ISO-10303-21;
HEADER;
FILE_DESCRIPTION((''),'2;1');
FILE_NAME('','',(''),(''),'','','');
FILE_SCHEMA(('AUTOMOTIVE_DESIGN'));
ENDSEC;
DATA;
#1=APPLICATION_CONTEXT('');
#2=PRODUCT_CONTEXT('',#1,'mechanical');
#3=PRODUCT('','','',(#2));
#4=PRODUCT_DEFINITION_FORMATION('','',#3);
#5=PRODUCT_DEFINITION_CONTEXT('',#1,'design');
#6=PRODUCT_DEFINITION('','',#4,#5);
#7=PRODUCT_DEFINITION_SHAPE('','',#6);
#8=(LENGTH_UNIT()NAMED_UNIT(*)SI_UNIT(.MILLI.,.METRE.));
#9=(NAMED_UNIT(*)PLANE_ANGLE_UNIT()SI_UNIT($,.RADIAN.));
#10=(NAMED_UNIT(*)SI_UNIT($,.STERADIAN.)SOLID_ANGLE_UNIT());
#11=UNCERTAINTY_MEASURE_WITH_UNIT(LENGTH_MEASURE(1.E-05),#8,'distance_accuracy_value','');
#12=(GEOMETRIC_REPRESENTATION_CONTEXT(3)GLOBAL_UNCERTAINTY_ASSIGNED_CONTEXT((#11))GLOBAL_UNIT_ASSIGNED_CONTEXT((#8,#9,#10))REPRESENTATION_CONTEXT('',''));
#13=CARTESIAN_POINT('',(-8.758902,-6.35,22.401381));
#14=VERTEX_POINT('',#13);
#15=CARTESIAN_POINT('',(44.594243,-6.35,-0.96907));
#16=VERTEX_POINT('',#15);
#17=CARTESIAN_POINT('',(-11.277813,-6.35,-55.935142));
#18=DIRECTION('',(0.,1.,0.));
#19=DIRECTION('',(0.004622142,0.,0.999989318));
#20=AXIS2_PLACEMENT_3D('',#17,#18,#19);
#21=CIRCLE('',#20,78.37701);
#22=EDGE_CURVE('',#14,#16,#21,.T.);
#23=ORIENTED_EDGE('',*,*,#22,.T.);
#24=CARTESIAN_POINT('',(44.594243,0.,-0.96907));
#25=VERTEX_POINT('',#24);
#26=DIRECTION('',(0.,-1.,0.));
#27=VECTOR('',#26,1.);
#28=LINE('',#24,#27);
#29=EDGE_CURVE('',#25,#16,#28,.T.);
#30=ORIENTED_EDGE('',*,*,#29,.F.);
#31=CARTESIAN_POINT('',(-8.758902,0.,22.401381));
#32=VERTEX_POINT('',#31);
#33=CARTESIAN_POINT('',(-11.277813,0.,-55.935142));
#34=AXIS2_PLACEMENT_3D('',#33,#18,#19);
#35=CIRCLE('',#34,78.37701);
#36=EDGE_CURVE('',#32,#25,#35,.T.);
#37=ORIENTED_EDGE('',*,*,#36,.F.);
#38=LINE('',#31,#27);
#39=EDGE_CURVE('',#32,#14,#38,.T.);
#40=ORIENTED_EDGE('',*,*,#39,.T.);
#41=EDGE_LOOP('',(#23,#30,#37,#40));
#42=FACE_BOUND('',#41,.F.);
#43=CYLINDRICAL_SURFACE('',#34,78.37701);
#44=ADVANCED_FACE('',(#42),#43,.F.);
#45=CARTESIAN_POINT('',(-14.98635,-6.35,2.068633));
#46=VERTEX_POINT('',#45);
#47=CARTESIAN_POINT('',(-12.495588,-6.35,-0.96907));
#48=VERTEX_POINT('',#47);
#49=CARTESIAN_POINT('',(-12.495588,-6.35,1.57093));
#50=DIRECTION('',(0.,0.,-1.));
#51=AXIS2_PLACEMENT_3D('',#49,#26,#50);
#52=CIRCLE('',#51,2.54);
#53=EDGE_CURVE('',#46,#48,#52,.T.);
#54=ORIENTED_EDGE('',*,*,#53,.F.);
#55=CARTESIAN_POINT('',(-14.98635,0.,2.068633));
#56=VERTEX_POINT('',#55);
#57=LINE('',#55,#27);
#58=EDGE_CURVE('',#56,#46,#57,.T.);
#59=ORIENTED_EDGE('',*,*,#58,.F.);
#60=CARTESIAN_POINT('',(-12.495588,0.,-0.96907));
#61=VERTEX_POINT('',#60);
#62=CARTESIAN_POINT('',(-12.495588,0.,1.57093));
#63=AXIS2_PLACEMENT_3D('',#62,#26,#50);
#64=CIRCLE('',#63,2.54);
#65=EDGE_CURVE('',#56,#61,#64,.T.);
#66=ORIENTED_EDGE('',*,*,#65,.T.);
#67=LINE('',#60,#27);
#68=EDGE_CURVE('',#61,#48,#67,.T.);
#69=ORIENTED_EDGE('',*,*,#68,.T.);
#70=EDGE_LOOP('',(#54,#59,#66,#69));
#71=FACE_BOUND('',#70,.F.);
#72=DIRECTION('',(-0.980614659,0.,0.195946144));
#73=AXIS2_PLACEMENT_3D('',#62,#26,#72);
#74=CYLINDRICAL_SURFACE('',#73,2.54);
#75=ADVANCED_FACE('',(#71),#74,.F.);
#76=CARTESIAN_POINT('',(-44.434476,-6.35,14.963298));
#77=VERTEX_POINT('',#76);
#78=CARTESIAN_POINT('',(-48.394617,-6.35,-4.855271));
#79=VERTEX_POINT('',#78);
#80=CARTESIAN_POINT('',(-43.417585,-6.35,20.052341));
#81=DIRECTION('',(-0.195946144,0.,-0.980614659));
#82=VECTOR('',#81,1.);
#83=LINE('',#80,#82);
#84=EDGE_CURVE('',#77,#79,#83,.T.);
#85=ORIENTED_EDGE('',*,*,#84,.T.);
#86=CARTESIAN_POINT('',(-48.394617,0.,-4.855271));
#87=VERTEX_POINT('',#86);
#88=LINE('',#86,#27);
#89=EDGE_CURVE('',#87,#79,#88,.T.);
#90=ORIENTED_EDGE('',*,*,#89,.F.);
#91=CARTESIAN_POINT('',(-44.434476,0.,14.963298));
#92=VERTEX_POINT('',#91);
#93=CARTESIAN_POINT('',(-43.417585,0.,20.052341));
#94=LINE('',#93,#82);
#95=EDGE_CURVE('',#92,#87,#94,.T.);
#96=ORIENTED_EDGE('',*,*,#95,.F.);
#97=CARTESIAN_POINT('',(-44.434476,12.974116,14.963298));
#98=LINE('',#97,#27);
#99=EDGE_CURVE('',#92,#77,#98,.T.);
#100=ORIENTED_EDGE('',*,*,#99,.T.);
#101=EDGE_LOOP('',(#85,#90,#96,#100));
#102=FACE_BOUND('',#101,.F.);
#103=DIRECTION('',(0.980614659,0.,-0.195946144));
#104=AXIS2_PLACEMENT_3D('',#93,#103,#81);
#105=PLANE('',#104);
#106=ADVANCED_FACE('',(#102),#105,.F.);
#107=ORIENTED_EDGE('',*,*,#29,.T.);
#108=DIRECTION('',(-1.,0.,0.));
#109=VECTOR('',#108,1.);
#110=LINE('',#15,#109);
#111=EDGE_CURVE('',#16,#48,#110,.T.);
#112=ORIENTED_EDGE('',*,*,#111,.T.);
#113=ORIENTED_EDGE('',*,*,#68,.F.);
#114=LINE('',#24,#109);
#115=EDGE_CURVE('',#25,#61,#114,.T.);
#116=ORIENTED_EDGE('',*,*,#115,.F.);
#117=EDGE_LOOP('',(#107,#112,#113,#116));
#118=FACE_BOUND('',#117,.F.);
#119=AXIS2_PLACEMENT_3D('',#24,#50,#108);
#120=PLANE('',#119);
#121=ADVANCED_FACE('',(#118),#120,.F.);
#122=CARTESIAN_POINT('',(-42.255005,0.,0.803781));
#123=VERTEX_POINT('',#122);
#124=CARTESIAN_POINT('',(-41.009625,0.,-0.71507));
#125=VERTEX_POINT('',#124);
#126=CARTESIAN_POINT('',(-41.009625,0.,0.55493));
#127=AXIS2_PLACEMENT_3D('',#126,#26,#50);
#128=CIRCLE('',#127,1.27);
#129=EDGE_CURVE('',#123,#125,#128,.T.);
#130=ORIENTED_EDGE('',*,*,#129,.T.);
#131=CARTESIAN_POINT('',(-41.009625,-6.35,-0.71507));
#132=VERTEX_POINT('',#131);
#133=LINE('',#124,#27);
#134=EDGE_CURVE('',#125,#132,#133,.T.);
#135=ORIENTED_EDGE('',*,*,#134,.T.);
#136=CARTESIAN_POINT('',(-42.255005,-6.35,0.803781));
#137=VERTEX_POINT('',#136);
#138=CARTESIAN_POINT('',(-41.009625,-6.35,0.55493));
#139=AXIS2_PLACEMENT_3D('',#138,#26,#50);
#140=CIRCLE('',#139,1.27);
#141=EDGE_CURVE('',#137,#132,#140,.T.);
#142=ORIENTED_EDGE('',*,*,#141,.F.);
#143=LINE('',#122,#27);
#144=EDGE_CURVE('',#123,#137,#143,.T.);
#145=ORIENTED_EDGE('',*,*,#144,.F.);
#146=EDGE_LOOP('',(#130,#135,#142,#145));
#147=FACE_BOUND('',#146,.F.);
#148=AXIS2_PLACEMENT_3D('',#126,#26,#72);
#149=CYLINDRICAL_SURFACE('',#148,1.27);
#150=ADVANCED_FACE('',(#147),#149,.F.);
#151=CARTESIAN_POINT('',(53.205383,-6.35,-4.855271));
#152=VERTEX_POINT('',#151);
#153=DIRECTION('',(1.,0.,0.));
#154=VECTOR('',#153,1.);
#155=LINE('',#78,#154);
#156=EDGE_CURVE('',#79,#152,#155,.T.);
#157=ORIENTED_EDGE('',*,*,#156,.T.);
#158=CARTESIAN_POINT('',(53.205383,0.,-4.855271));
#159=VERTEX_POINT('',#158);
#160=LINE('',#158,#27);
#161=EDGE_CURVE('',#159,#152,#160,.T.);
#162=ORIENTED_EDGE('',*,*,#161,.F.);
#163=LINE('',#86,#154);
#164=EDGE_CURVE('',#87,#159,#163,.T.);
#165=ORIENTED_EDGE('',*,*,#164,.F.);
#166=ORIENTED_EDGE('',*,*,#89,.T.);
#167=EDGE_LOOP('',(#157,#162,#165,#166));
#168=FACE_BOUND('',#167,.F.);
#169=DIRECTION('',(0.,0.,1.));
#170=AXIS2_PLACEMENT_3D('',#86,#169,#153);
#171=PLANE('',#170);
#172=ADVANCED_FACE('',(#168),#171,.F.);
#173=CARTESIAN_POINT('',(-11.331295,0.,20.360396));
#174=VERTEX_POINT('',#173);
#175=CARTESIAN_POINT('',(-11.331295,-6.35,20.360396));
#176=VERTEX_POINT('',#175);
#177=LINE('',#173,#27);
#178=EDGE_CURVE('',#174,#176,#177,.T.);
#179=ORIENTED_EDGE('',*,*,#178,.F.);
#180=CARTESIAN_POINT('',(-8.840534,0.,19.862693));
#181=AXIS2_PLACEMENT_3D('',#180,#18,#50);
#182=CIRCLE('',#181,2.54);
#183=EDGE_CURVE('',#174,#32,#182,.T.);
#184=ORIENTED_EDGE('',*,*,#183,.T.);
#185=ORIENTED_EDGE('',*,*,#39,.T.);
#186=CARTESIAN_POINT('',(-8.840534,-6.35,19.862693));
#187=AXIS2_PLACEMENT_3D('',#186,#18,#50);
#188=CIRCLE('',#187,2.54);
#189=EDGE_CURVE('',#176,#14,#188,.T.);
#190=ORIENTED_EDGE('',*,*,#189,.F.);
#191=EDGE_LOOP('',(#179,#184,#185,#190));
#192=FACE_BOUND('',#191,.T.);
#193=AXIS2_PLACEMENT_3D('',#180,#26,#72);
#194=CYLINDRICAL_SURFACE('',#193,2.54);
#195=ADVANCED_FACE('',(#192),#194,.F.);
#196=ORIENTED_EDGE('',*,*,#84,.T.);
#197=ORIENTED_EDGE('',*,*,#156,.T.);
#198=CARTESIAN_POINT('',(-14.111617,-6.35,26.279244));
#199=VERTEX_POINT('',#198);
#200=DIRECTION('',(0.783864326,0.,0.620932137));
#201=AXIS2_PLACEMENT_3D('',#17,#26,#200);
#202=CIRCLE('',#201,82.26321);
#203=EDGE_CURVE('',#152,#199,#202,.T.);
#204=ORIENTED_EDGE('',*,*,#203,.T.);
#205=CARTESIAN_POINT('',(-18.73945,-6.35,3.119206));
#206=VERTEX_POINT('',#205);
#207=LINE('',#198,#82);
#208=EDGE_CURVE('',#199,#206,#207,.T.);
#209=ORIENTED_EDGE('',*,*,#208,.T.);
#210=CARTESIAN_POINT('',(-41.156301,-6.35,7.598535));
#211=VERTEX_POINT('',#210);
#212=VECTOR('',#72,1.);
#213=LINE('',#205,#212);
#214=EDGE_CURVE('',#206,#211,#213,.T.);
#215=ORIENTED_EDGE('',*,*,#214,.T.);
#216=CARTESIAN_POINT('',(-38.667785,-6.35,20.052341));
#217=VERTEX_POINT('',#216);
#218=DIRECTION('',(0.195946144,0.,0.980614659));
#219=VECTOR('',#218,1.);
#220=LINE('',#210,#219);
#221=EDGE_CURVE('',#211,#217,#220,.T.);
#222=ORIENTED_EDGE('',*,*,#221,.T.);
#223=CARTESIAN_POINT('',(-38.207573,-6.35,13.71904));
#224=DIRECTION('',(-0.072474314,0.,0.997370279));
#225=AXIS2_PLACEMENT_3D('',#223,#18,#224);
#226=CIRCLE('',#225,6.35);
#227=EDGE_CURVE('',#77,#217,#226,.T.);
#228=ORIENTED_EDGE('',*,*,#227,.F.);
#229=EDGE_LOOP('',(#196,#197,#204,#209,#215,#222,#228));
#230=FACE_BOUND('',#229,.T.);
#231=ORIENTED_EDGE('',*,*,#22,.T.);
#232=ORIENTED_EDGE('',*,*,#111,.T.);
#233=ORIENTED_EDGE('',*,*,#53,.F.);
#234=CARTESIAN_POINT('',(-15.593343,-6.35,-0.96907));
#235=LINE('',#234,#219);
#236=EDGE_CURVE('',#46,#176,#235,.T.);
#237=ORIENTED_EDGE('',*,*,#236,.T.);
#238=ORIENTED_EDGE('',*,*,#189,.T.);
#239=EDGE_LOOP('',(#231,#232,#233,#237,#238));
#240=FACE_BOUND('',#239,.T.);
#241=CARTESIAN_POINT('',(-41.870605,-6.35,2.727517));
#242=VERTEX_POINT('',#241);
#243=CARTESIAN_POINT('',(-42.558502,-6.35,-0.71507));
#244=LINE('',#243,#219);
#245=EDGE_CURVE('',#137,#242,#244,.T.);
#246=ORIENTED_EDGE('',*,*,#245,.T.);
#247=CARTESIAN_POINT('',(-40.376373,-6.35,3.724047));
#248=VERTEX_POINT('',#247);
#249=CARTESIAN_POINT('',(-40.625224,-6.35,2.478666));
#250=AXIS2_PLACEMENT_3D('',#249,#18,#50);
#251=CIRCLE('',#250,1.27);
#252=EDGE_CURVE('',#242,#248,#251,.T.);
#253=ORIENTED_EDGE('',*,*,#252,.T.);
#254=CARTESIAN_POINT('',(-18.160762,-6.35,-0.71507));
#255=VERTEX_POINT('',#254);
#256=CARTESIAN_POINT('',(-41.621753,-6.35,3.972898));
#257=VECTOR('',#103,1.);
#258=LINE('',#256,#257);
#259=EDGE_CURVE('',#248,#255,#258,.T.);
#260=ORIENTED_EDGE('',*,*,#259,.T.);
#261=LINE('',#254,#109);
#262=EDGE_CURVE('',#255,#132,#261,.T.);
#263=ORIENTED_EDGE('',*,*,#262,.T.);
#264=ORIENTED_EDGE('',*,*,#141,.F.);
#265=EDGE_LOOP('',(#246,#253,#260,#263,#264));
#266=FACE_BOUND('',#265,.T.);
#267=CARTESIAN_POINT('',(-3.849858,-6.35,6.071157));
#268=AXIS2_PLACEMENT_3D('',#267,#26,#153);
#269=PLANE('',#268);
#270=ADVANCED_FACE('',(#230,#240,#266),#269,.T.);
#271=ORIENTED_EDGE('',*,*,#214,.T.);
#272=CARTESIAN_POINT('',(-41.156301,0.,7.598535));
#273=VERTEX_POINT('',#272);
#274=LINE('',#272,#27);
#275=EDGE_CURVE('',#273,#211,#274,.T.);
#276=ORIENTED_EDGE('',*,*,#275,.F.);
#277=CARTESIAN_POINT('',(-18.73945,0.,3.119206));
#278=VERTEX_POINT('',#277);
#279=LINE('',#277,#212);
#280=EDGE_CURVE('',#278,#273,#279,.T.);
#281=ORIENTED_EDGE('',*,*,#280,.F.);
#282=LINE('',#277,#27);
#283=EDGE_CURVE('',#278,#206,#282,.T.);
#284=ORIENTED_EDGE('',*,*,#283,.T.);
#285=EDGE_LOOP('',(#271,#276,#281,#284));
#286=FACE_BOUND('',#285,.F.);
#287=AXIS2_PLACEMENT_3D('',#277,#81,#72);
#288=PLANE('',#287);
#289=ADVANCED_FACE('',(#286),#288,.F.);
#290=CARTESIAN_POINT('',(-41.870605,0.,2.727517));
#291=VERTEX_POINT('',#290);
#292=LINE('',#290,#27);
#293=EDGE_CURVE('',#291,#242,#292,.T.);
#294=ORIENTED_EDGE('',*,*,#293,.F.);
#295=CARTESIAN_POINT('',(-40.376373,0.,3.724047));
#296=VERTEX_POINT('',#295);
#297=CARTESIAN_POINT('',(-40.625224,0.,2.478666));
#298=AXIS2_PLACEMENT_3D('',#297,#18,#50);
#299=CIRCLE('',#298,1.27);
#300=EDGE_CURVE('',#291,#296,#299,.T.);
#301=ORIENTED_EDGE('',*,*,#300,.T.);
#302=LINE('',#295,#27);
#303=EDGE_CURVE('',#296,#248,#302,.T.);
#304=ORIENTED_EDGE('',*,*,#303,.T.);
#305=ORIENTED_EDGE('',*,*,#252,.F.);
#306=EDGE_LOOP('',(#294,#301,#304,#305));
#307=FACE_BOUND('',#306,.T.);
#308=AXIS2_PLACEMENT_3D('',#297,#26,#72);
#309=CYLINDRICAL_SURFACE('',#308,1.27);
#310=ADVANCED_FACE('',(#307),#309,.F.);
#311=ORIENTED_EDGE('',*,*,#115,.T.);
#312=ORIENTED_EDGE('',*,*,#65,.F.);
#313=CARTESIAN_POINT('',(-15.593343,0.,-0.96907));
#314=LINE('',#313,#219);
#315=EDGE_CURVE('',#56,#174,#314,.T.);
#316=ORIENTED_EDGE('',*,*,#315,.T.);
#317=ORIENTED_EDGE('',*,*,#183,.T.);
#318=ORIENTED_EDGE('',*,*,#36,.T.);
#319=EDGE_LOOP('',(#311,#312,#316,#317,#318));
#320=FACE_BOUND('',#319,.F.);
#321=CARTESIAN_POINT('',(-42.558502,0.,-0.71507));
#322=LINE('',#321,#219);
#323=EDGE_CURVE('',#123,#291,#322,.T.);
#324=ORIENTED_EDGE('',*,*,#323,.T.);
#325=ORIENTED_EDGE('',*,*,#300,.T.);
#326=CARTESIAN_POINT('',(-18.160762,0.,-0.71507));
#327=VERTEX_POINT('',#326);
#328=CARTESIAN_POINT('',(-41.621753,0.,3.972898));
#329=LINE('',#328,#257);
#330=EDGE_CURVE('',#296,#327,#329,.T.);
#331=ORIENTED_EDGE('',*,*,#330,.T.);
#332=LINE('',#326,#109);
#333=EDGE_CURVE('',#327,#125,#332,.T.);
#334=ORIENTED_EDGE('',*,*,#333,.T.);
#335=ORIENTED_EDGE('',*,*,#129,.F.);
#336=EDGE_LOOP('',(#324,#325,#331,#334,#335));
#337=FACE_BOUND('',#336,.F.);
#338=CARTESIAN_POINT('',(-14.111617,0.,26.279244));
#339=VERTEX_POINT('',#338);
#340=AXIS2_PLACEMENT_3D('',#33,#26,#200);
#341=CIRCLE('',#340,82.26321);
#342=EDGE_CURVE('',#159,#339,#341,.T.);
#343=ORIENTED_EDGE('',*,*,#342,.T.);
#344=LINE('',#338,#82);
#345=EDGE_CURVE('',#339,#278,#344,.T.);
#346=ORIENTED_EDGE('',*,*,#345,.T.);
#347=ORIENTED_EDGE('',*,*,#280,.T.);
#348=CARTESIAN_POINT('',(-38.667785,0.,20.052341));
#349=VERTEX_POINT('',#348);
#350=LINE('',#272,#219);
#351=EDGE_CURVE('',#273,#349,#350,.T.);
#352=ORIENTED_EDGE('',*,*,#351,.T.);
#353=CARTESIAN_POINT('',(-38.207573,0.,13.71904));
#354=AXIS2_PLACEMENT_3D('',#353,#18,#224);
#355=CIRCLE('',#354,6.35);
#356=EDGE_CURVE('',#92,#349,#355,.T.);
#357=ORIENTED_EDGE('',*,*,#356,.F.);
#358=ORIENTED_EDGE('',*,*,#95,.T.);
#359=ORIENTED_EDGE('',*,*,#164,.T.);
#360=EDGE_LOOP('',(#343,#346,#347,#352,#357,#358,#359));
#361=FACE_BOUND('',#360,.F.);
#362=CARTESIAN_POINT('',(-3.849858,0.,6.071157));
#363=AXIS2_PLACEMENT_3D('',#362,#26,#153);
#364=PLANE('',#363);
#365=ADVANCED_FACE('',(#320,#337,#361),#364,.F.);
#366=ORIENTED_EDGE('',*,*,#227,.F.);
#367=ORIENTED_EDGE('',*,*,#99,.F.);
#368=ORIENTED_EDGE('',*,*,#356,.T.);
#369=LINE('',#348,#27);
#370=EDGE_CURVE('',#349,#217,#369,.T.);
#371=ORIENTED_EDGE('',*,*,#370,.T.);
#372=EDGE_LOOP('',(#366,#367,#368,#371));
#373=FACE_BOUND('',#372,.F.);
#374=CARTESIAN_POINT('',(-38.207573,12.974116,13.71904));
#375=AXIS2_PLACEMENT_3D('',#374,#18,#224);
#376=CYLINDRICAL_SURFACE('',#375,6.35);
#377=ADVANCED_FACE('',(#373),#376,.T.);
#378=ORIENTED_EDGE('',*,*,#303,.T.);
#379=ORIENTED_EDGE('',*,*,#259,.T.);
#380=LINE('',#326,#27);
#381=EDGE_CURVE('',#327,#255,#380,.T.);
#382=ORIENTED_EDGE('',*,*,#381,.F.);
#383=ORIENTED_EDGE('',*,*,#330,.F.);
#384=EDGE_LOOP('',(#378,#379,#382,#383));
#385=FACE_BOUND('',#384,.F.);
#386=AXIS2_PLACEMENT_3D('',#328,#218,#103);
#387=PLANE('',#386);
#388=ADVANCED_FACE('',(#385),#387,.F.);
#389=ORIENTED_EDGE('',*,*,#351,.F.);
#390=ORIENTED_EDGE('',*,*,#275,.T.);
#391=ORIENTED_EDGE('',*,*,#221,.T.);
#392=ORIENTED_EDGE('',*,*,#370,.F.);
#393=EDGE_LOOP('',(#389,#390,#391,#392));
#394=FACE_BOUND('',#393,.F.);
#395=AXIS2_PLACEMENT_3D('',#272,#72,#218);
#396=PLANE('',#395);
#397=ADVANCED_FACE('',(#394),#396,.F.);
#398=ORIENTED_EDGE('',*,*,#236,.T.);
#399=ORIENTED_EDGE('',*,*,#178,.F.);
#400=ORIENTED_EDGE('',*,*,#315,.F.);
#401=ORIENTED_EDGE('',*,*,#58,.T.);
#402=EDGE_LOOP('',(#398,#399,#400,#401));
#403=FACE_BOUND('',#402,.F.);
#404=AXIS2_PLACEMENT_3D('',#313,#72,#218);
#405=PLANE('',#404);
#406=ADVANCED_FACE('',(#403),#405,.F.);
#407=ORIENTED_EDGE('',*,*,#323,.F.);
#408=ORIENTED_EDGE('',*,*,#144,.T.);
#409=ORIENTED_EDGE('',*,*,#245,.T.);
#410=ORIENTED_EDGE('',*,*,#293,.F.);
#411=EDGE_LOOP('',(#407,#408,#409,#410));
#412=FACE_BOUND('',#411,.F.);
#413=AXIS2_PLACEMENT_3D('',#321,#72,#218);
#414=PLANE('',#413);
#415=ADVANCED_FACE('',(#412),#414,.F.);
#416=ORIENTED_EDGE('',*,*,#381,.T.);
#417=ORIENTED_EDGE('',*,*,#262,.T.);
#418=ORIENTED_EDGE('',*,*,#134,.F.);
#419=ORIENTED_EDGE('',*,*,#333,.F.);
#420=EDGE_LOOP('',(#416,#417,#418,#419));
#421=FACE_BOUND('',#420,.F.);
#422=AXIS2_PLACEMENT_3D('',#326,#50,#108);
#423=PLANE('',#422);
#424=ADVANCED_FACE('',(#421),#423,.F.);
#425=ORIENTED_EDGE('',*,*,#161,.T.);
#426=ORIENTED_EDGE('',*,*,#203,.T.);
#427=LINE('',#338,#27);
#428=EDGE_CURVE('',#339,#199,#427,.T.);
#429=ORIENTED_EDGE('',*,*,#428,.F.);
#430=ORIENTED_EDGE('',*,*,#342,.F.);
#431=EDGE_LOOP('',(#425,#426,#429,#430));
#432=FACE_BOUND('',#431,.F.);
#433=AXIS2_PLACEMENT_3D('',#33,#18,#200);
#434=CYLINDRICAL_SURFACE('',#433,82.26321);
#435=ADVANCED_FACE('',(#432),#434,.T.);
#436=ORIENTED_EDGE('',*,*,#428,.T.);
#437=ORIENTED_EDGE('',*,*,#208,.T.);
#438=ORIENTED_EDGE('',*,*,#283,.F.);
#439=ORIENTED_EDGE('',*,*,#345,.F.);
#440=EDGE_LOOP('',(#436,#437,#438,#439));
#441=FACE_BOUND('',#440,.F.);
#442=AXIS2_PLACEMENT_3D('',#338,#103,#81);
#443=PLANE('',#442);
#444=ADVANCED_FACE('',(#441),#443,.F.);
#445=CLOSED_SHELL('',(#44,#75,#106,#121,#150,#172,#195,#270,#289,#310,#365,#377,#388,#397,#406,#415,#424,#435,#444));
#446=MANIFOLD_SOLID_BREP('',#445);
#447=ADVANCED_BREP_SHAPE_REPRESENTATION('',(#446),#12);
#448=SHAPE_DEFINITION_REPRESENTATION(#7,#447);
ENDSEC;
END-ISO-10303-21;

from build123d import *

# Parameters (mm, degrees)
F1_DEPTH    = 76.2
F2_R        = 2.54
F3_R        = 1.27
F4_T1_DEPTH = 102.1482316142
F5_DEPTH    = 69.85


# Not quite as in the source:
# - a fillet or chamfer that OpenCascade refuses, or shapes differently, is made with other operations: its cross-section is extruded or revolved along the edge and cut away or added


with BuildPart() as f1:
    # F0 (on Front) → F1 (new body)
    with BuildSketch(Plane.XZ):
        with BuildLine():
            Line((-38.6677846295, 20.0523413639), (-43.4175846295, 20.0523413639))
            Line((-43.4175846295, 20.0523413639), (-48.3946166933, -4.8552709632))
            Line((-48.3946166933, -4.8552709632), (53.2053833067, -4.8552709632))
            ThreePointArc((53.2053833067, -4.8552709632), (23.2548005589, 18.7290020933), (-14.1116172914, 26.2792444457))
            Line((-14.1116172914, 26.2792444457), (-18.739449567, 3.119206343))
            Line((-18.739449567, 3.119206343), (-41.1563006614, 7.5985352004))
            Line((-41.1563006614, 7.5985352004), (-38.6677846295, 20.0523413639))
        make_face()
        Polygon((-41.6217533096, 3.9728981134), (-18.1607622718, -0.7150704927), (-42.558501873, -0.7150704927), align=None, mode=Mode.SUBTRACT)
        with BuildLine():
            ThreePointArc((-10.9155429452, 22.4410306257), (19.1784355797, 16.2823947845), (44.5942434068, -0.9690704107))
            Line((44.5942434068, -0.9690704107), (-15.5933427256, -0.9690704107))
            Line((-15.5933427256, -0.9690704107), (-10.9155429452, 22.4410306257))
        make_face(mode=Mode.SUBTRACT)
    extrude(amount=F1_DEPTH)

    # F2
    f2_edges = [f1.edges().sort_by_distance(p)[0] for p in [
        (-10.915543, -38.1, 22.441031),
        (-15.593343, -38.1, -0.96907),
    ]]
    fillet(f2_edges, radius=F2_R)

    # F3
    f3_edges = [f1.edges().sort_by_distance(p)[0] for p in [
        (-41.621753, -38.1, 3.972898),
        (-42.558502, -38.1, -0.71507),
    ]]
    fillet(f3_edges, radius=F3_R)

    # F4: fillet of radius 6.35 on 1 edges, made by hand

    # F4_s2 → F4_t1 (cut)
    with BuildSketch(Plane.XZ.offset(-12.9741158071)):
        with BuildLine():
            ThreePointArc((-38.6677846295, 20.0523413639), (-42.4092351432, 18.4801883775), (-44.4344758164, 14.9632981071))
            Line((-44.4344758164, 14.9632981071), (-43.4175846295, 20.0523413639))
            Line((-43.4175846295, 20.0523413639), (-38.6677846295, 20.0523413639))
        make_face()
    extrude(amount=F4_T1_DEPTH, mode=Mode.SUBTRACT)

    # F5 (cut): a face of the model
    f5_faces = [f1.faces().sort_by_distance(p)[0] for p in [
        (-45.3723710361, -76.2, 4.845766414),
    ]]
    extrude(f5_faces, amount=-F5_DEPTH, mode=Mode.SUBTRACT)


solid = f1.part
